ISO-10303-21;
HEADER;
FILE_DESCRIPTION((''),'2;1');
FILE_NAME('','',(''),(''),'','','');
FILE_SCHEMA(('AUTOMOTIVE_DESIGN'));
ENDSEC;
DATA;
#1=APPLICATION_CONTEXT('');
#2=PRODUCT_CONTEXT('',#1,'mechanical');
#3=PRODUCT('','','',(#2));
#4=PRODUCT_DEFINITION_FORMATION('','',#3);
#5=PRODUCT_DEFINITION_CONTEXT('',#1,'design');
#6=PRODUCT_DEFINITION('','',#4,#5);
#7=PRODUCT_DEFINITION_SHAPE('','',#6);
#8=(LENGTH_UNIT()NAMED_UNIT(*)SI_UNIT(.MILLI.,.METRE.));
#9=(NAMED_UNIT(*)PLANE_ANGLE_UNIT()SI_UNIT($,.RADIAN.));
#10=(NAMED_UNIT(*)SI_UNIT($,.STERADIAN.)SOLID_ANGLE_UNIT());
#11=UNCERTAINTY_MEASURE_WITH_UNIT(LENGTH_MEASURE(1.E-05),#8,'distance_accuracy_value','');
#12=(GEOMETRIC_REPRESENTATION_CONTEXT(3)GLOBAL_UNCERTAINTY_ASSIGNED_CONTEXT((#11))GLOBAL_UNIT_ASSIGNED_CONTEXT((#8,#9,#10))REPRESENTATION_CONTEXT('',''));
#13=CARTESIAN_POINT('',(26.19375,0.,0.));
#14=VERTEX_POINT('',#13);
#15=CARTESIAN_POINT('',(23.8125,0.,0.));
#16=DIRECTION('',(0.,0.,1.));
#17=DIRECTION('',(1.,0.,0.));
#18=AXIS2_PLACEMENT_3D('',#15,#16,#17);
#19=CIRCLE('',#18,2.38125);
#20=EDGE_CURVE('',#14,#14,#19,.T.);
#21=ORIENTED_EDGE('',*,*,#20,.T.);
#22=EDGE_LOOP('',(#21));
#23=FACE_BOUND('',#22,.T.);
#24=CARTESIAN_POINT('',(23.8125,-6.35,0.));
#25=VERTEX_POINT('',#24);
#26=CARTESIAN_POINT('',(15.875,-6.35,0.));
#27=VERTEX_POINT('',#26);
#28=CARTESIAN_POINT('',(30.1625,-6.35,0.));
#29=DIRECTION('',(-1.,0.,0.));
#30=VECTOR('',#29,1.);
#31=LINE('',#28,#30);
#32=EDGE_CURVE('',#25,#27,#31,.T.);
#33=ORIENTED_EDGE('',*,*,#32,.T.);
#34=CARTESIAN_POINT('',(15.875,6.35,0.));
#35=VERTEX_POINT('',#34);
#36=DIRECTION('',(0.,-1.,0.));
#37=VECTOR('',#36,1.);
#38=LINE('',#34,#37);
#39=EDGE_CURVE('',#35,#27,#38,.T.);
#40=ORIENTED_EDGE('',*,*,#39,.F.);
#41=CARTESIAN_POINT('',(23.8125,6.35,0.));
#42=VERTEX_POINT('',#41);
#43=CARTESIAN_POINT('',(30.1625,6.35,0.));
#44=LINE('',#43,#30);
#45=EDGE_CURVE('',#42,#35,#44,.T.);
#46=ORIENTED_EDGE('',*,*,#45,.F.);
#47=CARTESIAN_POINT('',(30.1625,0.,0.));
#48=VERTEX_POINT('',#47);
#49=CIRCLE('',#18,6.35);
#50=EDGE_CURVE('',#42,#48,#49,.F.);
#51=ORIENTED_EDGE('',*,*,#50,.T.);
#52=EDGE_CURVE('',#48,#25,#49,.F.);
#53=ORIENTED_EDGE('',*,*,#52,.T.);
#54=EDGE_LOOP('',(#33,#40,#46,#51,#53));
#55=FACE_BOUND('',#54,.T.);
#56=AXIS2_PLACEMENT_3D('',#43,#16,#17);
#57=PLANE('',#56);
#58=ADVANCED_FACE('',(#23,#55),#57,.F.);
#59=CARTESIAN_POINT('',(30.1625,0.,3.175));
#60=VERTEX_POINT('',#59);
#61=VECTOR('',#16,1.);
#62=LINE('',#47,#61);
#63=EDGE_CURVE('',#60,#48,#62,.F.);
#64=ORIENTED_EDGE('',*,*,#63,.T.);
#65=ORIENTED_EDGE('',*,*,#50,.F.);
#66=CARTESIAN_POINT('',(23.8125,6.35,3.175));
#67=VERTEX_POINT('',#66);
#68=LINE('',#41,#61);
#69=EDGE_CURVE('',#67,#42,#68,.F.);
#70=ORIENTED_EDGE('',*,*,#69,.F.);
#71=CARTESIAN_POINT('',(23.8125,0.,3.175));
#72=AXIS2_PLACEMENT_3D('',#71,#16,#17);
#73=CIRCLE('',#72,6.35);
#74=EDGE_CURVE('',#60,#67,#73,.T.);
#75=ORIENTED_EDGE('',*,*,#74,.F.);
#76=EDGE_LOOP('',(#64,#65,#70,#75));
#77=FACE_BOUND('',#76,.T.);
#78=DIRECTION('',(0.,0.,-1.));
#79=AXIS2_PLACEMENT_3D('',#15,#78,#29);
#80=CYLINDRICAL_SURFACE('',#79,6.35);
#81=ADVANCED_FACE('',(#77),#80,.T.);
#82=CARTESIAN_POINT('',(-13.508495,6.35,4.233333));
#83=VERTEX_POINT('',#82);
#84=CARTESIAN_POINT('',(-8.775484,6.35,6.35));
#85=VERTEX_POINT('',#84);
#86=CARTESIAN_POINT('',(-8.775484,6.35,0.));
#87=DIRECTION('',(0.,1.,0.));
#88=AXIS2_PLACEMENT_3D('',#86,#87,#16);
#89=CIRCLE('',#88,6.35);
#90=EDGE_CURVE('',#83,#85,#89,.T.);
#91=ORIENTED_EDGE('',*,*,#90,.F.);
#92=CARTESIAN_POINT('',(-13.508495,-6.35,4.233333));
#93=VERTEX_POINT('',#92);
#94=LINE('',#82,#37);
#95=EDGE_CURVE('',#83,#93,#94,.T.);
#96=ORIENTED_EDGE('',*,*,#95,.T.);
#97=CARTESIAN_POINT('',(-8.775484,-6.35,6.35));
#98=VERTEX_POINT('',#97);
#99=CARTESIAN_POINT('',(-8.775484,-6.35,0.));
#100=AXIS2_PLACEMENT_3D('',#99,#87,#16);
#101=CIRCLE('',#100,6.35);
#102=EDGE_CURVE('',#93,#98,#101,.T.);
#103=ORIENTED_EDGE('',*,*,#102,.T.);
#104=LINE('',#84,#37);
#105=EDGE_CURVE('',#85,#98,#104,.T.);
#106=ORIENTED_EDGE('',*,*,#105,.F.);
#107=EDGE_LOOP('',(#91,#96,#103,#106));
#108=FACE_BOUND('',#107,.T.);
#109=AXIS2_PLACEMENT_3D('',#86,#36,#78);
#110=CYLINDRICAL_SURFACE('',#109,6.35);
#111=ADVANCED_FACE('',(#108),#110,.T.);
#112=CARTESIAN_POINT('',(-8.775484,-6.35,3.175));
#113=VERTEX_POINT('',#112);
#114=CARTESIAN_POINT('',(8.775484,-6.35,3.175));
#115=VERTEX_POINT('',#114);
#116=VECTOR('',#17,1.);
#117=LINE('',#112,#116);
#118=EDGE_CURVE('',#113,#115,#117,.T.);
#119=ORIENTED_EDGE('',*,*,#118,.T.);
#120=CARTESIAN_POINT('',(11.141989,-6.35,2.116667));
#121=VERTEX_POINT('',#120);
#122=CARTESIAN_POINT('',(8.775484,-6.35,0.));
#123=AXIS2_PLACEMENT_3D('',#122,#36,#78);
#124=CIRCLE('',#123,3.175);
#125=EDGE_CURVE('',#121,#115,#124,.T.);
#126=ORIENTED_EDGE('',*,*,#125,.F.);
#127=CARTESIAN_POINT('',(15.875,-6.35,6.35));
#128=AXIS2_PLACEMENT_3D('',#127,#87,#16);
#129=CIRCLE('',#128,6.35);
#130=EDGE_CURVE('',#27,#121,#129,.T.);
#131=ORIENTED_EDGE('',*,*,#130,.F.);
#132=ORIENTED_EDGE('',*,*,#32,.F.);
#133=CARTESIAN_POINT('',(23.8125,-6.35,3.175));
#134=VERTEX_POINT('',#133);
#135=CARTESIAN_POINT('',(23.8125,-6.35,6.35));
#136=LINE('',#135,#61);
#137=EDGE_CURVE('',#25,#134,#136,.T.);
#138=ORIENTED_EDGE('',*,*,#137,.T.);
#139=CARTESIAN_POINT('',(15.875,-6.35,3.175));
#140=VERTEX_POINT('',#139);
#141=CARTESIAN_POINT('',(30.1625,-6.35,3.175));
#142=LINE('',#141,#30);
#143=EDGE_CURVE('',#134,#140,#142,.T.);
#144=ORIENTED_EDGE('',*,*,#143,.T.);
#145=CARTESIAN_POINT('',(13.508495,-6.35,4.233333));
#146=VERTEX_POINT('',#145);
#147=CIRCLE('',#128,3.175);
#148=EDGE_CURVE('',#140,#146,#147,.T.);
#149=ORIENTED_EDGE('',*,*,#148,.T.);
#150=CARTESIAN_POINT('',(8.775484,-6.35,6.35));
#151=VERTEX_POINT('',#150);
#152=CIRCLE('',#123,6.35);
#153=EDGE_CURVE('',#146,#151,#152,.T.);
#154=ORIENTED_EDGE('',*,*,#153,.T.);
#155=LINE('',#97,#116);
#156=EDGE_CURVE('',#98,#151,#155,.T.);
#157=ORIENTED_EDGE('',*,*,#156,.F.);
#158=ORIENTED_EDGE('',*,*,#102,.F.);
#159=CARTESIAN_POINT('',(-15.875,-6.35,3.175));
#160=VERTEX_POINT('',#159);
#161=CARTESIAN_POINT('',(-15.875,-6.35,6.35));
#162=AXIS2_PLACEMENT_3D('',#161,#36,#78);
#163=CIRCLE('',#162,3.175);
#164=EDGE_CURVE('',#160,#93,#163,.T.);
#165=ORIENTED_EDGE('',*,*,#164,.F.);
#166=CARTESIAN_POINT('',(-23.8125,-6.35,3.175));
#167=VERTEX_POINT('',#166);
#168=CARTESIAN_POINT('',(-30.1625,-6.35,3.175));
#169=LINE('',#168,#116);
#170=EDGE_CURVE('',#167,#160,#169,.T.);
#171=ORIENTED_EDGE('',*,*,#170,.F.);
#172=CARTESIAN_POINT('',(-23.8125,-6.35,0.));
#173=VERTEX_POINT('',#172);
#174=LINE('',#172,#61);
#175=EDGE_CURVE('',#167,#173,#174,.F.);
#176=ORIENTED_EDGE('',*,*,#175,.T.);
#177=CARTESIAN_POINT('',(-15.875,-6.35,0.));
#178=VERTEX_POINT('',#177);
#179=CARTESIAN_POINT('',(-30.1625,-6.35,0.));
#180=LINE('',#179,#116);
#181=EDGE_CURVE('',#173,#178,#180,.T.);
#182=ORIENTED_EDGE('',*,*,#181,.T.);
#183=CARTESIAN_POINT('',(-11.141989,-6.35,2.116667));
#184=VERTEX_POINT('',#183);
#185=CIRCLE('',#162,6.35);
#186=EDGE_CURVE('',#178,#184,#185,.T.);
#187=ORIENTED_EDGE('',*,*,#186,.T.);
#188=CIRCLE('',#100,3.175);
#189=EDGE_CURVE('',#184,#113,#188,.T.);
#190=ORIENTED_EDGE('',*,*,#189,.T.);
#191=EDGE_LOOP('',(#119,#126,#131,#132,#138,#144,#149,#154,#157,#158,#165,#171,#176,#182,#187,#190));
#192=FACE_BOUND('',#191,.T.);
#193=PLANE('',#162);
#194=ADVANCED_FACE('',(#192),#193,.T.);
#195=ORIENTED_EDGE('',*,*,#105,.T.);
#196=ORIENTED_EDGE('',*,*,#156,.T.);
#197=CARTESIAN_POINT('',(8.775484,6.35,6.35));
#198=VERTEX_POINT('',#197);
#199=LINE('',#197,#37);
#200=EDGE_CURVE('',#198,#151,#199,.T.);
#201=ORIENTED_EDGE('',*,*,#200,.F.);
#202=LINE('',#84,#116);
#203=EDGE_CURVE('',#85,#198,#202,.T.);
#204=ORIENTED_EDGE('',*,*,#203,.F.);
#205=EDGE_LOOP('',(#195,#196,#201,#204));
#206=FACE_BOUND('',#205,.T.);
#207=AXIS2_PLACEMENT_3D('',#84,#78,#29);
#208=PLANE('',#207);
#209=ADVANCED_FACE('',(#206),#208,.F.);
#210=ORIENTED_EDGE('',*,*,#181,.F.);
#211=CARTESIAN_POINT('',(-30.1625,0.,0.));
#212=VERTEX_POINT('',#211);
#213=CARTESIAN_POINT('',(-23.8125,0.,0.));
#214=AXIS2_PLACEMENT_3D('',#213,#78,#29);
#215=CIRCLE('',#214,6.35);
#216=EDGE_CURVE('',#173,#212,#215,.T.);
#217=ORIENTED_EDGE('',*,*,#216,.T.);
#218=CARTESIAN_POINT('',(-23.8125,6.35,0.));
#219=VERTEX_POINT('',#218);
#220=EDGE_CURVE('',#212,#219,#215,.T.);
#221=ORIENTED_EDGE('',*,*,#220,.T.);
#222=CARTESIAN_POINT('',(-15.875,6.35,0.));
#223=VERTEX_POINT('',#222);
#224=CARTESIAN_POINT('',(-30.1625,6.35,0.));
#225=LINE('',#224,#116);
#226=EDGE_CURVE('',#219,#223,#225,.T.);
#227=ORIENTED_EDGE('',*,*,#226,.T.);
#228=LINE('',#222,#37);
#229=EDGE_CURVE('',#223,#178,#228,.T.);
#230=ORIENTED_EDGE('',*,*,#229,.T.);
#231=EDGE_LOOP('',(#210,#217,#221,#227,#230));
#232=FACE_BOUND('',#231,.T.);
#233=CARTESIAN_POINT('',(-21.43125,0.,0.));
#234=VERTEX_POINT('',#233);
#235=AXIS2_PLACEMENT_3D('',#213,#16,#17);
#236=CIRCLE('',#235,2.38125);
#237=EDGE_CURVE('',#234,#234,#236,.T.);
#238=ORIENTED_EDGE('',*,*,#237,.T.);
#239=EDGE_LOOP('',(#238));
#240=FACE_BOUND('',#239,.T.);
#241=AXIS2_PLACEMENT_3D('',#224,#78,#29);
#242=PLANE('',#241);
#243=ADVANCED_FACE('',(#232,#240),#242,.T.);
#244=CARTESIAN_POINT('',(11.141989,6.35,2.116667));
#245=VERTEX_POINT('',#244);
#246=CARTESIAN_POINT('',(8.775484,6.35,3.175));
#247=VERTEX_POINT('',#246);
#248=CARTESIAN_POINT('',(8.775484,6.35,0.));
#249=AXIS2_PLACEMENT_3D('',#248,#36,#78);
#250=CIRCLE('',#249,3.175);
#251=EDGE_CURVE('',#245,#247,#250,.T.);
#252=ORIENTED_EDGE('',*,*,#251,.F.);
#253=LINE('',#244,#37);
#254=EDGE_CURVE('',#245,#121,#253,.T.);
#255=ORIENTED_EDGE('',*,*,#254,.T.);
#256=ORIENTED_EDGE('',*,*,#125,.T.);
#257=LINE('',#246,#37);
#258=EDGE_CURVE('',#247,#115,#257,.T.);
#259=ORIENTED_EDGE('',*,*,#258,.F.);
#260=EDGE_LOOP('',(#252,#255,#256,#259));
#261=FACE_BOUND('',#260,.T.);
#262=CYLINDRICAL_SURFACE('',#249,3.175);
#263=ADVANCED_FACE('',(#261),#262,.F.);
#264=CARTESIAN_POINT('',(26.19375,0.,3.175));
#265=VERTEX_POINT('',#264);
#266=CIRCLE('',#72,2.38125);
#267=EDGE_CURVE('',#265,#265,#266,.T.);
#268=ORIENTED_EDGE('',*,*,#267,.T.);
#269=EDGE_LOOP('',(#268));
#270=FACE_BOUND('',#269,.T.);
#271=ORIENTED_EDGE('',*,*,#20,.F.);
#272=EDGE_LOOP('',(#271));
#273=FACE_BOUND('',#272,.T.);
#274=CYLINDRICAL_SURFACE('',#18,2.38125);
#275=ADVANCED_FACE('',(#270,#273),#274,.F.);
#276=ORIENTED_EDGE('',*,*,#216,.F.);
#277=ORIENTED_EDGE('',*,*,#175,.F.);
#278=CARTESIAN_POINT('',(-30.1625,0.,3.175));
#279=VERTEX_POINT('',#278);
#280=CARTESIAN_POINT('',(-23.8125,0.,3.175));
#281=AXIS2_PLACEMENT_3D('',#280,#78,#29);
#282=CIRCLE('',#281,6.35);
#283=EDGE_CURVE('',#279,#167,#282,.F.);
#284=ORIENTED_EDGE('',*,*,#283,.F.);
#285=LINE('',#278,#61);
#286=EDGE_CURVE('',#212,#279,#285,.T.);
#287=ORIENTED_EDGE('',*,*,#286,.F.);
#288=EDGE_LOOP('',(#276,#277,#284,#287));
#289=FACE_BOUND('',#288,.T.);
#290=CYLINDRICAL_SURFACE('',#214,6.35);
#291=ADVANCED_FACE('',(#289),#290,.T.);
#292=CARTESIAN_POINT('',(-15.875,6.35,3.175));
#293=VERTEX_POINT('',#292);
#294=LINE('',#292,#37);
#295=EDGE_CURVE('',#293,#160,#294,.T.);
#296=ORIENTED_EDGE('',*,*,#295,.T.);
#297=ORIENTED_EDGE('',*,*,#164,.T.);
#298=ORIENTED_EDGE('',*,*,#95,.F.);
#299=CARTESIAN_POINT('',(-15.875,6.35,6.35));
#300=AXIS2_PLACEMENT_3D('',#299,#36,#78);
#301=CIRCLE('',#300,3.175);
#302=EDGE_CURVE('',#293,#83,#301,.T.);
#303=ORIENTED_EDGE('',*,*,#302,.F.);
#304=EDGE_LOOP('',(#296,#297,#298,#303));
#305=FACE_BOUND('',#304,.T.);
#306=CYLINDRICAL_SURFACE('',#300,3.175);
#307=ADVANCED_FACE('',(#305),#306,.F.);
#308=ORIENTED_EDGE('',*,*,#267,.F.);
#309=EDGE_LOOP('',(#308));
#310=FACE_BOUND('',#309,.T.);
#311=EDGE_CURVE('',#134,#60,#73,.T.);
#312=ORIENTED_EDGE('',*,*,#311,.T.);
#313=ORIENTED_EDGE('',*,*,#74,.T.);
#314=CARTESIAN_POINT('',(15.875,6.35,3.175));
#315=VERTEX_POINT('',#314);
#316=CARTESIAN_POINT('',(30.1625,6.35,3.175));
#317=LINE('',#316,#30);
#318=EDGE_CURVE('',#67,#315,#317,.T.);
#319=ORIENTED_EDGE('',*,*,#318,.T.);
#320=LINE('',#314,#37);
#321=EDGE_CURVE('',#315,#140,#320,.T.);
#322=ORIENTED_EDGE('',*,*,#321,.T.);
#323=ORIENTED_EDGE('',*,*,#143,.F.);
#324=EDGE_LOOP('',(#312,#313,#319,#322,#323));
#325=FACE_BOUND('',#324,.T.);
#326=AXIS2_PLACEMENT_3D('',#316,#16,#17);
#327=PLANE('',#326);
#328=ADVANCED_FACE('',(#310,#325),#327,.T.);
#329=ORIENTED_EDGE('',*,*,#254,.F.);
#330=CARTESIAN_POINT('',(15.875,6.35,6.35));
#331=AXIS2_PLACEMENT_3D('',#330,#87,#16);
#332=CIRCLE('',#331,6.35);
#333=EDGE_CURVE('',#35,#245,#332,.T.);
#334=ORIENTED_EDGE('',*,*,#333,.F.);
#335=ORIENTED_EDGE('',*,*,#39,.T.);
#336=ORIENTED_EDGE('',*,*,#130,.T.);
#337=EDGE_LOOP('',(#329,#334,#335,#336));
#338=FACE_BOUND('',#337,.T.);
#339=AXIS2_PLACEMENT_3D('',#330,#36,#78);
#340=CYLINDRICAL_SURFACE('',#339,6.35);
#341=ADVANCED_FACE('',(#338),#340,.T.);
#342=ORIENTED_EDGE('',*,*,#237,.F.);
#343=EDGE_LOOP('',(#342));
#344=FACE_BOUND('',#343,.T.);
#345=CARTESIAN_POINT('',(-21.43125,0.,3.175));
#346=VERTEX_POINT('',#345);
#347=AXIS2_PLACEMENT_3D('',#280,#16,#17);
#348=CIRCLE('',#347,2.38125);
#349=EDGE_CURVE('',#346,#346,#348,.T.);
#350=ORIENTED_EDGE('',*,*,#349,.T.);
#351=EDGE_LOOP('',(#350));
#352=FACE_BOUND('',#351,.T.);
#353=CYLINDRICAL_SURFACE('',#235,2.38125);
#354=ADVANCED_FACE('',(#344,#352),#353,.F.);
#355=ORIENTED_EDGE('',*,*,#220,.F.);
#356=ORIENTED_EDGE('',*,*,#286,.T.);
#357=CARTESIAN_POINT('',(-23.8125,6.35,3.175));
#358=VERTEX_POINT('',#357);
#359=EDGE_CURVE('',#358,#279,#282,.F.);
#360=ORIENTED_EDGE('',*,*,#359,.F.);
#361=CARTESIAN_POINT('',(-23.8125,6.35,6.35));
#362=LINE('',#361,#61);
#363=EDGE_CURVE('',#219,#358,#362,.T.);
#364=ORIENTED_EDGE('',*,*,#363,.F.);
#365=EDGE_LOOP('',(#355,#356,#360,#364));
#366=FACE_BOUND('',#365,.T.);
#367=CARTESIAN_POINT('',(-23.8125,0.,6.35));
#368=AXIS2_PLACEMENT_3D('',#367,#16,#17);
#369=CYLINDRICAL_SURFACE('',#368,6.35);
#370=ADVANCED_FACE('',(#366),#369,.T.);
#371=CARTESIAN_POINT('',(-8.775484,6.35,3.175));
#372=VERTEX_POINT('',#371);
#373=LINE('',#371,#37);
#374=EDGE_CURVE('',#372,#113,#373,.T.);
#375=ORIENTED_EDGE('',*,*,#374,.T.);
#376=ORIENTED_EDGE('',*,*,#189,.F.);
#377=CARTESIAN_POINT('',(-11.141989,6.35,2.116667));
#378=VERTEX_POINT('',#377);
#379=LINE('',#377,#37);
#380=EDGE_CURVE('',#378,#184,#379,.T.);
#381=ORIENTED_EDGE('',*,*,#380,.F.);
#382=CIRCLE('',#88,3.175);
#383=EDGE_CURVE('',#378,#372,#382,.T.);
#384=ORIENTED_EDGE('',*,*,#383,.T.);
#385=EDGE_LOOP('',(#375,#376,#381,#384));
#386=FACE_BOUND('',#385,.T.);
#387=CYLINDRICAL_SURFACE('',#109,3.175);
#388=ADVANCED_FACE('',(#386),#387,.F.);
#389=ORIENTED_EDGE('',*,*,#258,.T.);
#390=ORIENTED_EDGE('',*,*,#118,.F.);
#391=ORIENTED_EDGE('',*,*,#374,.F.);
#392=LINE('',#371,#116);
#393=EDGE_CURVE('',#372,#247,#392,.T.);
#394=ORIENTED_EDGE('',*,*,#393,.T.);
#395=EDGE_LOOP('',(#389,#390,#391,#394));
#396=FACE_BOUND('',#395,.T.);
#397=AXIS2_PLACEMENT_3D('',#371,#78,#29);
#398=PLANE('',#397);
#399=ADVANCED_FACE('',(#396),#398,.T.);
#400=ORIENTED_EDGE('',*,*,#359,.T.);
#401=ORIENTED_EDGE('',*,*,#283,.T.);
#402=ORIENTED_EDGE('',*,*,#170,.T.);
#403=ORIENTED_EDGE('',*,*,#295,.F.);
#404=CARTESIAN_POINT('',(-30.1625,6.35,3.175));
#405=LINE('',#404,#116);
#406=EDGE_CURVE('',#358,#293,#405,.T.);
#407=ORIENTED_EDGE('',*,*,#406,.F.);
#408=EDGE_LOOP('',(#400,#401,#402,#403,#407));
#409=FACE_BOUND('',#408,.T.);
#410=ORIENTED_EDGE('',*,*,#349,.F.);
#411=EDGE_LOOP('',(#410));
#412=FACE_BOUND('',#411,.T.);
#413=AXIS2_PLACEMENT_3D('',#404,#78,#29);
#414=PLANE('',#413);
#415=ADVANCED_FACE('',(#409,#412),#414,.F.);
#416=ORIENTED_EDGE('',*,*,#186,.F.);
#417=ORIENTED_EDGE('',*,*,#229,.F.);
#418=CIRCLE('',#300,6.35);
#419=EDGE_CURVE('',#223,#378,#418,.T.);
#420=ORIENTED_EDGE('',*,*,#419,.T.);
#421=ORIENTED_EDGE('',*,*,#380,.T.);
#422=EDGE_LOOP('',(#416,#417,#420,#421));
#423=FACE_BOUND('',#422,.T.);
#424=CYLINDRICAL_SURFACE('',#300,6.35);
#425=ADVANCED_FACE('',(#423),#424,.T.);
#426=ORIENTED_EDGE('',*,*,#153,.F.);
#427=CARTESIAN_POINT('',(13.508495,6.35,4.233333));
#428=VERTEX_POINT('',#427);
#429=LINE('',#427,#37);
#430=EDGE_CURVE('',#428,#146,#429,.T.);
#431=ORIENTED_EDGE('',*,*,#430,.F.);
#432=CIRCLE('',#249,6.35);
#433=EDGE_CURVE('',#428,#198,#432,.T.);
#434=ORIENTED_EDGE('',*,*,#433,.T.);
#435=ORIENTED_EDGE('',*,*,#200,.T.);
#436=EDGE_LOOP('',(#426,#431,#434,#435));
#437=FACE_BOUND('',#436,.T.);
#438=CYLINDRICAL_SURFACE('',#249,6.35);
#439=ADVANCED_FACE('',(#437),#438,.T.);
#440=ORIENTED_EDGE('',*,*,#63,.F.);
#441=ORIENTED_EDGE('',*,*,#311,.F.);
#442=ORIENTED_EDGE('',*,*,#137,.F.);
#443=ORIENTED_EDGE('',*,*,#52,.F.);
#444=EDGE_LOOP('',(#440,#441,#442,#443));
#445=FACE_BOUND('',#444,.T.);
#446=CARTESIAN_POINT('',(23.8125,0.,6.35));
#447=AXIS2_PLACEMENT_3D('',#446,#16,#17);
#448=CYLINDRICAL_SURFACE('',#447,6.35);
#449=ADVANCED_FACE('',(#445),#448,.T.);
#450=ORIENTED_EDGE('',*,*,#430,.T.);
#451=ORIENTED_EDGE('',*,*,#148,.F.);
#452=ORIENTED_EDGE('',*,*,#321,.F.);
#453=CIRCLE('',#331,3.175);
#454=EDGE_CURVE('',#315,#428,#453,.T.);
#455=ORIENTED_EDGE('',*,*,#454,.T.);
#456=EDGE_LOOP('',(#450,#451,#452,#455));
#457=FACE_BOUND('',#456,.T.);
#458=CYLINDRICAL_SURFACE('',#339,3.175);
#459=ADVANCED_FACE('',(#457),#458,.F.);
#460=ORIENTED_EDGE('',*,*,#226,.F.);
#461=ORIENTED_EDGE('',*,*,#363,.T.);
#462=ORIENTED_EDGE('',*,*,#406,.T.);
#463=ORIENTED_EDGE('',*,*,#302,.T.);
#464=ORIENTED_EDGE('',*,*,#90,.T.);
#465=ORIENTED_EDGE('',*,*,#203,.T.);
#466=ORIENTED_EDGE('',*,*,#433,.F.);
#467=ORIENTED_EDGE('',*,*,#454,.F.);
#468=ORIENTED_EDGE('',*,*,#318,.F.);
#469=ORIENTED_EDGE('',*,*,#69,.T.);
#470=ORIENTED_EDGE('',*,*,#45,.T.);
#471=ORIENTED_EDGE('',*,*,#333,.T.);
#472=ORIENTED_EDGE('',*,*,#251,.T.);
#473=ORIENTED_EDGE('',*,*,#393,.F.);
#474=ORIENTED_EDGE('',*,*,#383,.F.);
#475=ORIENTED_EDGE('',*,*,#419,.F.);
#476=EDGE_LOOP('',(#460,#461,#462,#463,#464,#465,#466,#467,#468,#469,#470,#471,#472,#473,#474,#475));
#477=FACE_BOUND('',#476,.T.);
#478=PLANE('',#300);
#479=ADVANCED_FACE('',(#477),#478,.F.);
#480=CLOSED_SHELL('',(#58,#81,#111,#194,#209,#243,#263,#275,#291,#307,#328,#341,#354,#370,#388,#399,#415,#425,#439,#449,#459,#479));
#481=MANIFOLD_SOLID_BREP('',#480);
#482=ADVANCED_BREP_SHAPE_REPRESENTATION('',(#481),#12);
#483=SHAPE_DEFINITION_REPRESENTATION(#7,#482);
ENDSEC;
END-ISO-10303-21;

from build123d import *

# Parameters (mm, degrees)
BASE_EXTRUDE_DEPTH = 6.35
FILLET1_R          = 6.35
SKETCH2_R          = 2.38125
CUT_EXTRUDE1_DEPTH = 31.986763807


with BuildPart() as part:
    # Sketch1 → Base-Extrude (new, symmetric)
    with BuildSketch(Plane(origin=(0, 0, 0), x_dir=(1, 0, 0), z_dir=(0, 1, 0))):
        with BuildLine():
            Line((-30.1625, 0), (-15.875, 0))
            ThreePointArc((-15.875, 0), (-13.282623356, -0.5532696), (-11.141989448, -2.116666667))
            ThreePointArc((-11.141989448, -2.116666667), (-10.071672494, -2.8983652), (-8.775484171, -3.175))
            Line((-8.775484171, -3.175), (8.775484171, -3.175))
            ThreePointArc((8.775484171, -3.175), (10.071672494, -2.8983652), (11.141989448, -2.116666667))
            ThreePointArc((11.141989448, -2.116666667), (13.282623356, -0.5532696), (15.875, 0))
            Line((15.875, 0), (30.1625, 0))
            Line((30.1625, 0), (30.1625, -3.175))
            Line((30.1625, -3.175), (15.875, -3.175))
            ThreePointArc((15.875, -3.175), (14.578811678, -3.4516348), (13.508494724, -4.233333333))
            ThreePointArc((13.508494724, -4.233333333), (11.367860816, -5.7967304), (8.775484171, -6.35))
            Line((8.775484171, -6.35), (-8.775484171, -6.35))
            ThreePointArc((-8.775484171, -6.35), (-11.367860816, -5.7967304), (-13.508494724, -4.233333333))
            ThreePointArc((-13.508494724, -4.233333333), (-14.578811678, -3.4516348), (-15.875, -3.175))
            Line((-15.875, -3.175), (-30.1625, -3.175))
            Line((-30.1625, -3.175), (-30.1625, 0))
        make_face()
    extrude(amount=BASE_EXTRUDE_DEPTH, both=True)

    # Fillet1
    fillet1_edges = [part.edges().sort_by_distance(p)[0] for p in [
        (30.1625, -6.35, 1.5875),
        (-30.1625, -6.35, 1.5875),
        (30.1625, 6.35, 1.5875),
        (-30.1625, 6.35, 1.5875),
    ]]
    fillet(fillet1_edges, radius=FILLET1_R - 0.0001)  # a hair under: the kernel refuses the full size

    # Sketch2 → Cut-Extrude1 (cut, through all)
    with BuildSketch(Plane.XY.offset(3.175)):
        with Locations((23.8125, 0)):
            Circle(SKETCH2_R)
        with Locations((-23.8125, 0)):
            Circle(SKETCH2_R)
    extrude(amount=-CUT_EXTRUDE1_DEPTH, mode=Mode.SUBTRACT)


solid = part.part
